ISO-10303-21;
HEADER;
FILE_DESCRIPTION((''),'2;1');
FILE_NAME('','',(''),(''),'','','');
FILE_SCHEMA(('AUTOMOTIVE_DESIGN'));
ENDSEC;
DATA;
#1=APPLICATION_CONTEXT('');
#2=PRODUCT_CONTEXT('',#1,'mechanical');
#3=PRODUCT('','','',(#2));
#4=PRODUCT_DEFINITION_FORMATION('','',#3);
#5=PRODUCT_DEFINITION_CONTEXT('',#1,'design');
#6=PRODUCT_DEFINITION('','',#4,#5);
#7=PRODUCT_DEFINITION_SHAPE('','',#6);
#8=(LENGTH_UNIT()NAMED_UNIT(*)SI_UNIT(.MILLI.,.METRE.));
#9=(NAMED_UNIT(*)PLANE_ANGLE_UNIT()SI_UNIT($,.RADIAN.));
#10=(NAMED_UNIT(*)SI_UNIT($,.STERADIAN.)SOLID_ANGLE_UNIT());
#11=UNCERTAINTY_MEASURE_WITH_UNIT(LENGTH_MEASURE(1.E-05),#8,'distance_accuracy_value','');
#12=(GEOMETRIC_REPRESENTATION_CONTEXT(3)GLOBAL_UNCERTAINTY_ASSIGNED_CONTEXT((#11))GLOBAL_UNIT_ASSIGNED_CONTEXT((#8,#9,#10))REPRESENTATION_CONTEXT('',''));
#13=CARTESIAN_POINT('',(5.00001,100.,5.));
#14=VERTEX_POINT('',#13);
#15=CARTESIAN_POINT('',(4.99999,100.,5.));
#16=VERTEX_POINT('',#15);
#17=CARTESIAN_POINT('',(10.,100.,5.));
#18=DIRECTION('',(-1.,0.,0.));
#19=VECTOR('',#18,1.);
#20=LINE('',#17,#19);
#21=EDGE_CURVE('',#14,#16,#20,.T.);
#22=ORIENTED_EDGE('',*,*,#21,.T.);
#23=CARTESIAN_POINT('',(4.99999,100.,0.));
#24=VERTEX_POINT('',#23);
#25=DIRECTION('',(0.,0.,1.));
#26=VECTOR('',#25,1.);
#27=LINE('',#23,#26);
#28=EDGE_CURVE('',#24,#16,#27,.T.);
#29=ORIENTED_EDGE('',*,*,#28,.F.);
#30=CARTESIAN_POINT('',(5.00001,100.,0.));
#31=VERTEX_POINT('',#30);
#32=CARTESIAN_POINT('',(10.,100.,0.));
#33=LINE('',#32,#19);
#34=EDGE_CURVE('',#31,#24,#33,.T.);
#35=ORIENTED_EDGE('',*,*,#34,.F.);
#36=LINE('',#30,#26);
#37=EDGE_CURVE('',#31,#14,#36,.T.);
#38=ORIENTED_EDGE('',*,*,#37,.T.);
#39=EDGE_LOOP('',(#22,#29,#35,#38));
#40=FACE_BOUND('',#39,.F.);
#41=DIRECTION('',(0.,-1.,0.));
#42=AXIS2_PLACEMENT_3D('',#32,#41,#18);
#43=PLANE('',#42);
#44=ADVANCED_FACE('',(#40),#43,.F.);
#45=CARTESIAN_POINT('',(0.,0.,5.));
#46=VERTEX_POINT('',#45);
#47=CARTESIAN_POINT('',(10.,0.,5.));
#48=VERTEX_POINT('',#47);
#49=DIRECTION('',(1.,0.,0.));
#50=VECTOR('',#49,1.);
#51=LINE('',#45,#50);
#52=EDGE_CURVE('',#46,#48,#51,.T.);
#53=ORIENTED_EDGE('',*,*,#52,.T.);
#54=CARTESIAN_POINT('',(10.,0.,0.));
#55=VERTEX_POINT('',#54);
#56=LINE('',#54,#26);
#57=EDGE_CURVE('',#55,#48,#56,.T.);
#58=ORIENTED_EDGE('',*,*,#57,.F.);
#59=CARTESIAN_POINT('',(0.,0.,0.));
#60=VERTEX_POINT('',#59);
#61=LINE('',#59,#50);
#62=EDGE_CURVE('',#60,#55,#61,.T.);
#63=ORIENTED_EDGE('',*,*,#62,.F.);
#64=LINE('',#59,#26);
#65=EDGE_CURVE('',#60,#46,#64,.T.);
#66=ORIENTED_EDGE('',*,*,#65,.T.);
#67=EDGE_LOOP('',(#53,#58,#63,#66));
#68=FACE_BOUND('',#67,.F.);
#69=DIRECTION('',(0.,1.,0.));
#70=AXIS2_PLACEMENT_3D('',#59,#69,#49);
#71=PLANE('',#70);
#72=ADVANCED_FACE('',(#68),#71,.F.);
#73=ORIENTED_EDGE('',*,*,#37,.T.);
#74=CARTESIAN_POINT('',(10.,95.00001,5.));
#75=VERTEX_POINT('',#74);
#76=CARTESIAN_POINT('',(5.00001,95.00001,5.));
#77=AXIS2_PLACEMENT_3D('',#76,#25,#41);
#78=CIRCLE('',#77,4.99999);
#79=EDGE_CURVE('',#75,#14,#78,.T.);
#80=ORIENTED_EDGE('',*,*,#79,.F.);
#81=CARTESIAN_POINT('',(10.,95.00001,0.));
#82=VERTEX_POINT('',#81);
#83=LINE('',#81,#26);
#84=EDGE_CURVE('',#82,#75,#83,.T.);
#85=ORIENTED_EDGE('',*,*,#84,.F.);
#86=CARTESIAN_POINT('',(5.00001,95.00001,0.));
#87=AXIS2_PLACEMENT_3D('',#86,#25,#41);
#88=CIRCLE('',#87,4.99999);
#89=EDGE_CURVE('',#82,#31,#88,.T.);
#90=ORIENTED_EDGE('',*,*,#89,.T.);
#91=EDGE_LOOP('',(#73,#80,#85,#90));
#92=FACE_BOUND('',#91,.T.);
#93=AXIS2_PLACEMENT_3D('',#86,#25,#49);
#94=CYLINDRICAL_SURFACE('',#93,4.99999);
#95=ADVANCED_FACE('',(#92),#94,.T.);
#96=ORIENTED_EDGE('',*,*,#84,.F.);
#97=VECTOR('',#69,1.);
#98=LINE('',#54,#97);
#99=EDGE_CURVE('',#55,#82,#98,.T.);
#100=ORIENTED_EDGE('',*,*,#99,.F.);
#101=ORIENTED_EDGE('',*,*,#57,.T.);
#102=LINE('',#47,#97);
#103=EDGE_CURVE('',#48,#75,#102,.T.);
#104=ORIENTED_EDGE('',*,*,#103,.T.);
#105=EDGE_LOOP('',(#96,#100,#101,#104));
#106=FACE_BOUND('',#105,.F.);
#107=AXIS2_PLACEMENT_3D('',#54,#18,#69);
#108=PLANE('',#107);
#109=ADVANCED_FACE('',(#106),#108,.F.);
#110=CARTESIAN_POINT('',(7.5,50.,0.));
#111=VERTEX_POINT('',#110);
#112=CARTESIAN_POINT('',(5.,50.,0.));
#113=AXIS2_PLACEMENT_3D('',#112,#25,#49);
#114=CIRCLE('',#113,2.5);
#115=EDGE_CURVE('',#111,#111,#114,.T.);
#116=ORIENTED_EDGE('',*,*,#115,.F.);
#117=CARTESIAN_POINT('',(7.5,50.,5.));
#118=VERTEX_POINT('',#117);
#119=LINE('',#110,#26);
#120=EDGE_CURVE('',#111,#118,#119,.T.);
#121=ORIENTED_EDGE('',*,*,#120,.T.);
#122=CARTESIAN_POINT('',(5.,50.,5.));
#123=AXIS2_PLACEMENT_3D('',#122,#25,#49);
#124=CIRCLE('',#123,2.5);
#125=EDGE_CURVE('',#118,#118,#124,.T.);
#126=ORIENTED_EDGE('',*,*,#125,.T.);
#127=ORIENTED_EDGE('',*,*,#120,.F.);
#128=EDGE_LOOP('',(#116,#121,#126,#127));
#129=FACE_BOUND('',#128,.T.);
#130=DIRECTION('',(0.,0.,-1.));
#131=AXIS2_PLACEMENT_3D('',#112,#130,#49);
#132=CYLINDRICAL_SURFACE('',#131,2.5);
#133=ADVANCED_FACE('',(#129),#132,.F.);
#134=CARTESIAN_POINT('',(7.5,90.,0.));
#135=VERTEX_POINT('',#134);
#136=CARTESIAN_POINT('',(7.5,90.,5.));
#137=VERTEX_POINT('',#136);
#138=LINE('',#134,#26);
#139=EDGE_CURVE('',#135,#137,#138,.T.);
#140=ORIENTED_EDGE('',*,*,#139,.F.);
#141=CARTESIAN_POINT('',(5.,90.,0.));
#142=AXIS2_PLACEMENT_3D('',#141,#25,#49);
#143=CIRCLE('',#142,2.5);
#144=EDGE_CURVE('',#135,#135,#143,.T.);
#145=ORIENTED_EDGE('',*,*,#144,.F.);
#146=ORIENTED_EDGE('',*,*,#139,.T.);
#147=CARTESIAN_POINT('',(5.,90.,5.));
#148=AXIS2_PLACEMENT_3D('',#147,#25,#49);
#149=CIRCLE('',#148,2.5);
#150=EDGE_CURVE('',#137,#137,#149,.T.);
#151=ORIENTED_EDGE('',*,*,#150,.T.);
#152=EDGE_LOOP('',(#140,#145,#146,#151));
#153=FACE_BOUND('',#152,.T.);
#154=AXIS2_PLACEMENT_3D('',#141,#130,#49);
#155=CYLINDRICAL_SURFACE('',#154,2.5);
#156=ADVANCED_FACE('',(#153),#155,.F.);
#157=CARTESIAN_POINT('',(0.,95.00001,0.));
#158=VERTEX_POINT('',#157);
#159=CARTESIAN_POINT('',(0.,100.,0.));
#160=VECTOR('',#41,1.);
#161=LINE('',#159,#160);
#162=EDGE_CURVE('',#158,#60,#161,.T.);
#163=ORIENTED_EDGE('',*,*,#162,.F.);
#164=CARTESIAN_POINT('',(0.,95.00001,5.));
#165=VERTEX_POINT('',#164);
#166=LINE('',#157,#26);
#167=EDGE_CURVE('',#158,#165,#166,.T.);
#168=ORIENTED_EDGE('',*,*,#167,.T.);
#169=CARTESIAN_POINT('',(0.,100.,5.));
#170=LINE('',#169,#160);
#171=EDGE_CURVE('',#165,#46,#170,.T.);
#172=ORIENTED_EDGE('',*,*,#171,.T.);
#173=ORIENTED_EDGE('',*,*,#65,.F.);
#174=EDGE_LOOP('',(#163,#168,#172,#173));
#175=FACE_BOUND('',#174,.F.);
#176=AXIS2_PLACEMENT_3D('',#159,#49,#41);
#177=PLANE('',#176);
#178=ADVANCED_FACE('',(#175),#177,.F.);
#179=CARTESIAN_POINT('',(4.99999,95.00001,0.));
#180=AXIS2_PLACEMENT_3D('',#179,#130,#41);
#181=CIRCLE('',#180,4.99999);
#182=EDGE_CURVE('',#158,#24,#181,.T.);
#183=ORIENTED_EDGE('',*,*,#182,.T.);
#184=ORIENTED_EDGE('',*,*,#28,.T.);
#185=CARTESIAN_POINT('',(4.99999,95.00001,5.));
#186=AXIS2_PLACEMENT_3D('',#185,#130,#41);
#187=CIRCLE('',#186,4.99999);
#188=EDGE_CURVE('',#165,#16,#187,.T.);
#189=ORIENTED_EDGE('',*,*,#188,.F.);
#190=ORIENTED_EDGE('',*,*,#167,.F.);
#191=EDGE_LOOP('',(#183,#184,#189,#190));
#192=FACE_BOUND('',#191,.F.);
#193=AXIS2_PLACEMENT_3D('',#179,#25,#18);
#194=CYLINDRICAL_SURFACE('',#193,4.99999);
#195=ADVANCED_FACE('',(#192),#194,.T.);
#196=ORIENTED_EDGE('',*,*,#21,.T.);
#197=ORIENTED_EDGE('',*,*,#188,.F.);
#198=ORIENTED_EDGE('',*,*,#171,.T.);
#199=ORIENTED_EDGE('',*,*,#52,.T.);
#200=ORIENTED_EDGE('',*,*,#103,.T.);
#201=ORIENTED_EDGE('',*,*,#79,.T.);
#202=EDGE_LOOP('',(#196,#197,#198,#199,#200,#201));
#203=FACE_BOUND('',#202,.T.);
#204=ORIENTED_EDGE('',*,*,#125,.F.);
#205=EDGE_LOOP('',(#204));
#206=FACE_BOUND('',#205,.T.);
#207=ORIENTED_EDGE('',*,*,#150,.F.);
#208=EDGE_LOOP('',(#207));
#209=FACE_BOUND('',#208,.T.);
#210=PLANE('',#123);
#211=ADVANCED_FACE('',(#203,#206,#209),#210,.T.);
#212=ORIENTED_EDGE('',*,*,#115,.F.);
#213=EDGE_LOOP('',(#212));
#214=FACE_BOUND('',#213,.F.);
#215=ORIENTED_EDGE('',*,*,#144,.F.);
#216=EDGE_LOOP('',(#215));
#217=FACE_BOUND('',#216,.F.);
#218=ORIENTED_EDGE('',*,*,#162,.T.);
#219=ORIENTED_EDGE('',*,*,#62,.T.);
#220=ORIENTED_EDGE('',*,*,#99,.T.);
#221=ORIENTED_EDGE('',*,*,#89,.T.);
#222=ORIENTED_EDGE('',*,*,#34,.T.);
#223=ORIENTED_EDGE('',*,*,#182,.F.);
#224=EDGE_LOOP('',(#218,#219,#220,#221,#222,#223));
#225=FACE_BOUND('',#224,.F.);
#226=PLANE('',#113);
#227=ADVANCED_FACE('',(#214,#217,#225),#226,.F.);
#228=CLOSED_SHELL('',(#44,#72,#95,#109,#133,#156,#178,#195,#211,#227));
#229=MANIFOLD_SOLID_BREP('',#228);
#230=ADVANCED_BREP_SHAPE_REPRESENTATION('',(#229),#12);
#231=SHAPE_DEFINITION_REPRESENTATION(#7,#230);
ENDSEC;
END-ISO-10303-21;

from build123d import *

# Parameters (mm, degrees)
F0_R     = 2.5
F1_DEPTH = 5
F2_R     = 4.99999


# Not quite as in the source:
# - a fillet or chamfer is up to 0.001 mm smaller than in the source, because OpenCascade refuses the exact size


with BuildPart() as f1:
    # F0 (on Top) → F1 (new body)
    with BuildSketch(Plane.XY):
        Polygon((0, 50), (0, 0), (10, 0), (10, 100), (0, 100), align=None)
        with Locations((5, 50)):
            Circle(F0_R, mode=Mode.SUBTRACT)
        with Locations((5, 90)):
            Circle(F0_R, mode=Mode.SUBTRACT)
    extrude(amount=F1_DEPTH)

    # F2 (radius 5 in the source; OpenCascade refuses exactly that, so slightly less here)
    f2_edges = [f1.edges().sort_by_distance(p)[0] for p in [
        (0, 100, 2.5),
        (10, 100, 2.5),
    ]]
    fillet(f2_edges, radius=F2_R)


solid = f1.part
